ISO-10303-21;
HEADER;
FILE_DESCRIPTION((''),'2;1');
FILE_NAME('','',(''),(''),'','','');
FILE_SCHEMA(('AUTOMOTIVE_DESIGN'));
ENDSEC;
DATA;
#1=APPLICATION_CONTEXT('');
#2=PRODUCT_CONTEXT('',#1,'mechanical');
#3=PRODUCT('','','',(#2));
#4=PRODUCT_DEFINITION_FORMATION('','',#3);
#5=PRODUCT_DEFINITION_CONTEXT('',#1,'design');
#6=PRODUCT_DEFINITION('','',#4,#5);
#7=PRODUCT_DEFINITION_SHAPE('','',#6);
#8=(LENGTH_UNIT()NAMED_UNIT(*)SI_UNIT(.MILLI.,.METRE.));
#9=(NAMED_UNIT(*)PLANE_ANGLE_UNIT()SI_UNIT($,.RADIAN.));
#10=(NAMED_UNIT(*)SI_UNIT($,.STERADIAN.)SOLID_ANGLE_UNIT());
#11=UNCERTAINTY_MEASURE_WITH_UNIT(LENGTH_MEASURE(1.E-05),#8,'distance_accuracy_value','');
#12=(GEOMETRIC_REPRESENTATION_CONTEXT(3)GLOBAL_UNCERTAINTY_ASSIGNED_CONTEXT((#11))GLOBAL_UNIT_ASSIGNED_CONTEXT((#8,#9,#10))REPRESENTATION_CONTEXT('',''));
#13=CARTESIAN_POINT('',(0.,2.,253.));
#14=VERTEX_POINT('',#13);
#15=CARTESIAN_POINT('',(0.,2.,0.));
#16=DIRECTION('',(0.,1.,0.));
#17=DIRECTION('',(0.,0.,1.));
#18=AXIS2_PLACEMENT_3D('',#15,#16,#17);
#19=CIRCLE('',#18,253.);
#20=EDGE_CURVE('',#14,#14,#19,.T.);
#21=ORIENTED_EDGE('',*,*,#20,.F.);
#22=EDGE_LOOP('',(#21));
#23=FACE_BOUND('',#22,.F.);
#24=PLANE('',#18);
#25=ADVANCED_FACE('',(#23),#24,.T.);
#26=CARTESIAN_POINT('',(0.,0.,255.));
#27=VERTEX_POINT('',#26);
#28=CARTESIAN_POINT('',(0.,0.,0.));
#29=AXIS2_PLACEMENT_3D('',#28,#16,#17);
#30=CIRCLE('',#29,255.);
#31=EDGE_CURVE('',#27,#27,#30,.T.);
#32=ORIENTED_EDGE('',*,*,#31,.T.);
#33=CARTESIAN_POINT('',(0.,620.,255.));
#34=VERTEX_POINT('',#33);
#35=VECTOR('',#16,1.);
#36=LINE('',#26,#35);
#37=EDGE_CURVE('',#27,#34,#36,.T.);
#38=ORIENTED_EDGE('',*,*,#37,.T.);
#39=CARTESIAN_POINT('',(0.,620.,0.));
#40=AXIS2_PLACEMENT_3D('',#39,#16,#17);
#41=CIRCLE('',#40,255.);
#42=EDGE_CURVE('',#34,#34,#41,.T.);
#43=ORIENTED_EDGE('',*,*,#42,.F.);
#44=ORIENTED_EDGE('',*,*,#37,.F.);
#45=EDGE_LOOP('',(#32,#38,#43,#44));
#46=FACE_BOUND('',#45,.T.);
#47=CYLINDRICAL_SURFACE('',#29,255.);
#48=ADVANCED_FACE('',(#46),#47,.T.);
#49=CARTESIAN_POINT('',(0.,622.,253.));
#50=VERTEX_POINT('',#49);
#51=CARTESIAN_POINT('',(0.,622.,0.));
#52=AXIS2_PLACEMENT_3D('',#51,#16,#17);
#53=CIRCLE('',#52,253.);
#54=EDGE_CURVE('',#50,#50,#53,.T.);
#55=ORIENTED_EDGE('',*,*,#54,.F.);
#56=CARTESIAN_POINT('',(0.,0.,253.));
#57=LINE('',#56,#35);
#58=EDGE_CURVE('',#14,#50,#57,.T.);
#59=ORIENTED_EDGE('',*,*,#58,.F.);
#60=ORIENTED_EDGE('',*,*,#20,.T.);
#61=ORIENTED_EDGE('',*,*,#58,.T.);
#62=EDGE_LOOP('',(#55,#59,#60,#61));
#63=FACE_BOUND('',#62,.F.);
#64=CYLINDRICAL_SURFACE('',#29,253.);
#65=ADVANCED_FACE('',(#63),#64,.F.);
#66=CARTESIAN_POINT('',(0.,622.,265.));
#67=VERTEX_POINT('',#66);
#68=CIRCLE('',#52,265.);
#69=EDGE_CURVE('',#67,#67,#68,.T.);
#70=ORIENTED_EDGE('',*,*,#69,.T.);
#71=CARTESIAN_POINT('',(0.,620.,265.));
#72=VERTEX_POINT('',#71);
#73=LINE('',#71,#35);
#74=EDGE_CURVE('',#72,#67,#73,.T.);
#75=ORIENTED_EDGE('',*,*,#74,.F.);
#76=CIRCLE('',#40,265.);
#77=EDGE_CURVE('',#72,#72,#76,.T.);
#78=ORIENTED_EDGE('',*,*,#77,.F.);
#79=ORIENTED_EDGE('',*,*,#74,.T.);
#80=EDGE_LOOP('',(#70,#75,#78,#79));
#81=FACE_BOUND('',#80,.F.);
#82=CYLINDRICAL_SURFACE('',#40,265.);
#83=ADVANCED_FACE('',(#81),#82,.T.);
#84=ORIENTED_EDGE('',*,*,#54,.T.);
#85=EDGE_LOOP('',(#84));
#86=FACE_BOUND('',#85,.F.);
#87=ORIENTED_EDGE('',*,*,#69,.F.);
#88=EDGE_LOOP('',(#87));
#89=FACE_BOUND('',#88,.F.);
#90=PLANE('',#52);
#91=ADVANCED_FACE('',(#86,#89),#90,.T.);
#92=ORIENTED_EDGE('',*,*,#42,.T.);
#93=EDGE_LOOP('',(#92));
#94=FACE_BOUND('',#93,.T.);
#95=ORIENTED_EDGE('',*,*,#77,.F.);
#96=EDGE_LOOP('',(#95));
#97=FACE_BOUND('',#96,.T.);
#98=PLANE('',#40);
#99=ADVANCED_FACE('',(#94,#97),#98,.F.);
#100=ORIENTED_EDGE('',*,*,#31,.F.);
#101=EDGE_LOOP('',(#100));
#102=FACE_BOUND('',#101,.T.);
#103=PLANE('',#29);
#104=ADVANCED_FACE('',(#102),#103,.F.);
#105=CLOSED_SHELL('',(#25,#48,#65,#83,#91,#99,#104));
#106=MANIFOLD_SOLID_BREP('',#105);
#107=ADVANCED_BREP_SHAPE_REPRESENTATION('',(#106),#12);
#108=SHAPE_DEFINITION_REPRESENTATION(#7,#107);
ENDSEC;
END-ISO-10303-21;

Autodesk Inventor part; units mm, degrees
ref_plane "YZ Plane" through (0, 0, 0) normal (1, 0, 0) x (0, 1, 0)
ref_plane "XZ Plane" through (0, 0, 0) normal (0, 1, 0) x (-1, 0, 0)
ref_plane "XY Plane" through (0, 0, 0) normal (0, 0, 1) x (1, 0, 0)
sketch "Sketch1" plane through (0, 0, 0) normal (1, 0, 0) x (0, 1, 0)
  line L0 (0, 0) -> (0, 255)
  line L1 (0, 255) -> (620, 255)
  line L2 (620, 255) -> (620, 265)
  line L3 (-124, 0) -> (744, 0) projected
  dimension "d0" = 620
  dimension "d1" = 255
  dimension "d2" = 10
surface revolve "RevolutionSrf1" sketch "Sketch1" angle 360 about axis through (0, -10, 0) along (0, 1, 0) shown yes curves L0 L1 L2
thicken "Thicken1" operation new thickness 2 both sides no extend neighbours no toward (0.0589628, 0, -0.9982602) faces at (-15.0355, 413.3333, 254.5563) (258.1049, 620, 5.6577) (70.5152, 0, 40.8296)
properties part number "smietnik1_srodek"
